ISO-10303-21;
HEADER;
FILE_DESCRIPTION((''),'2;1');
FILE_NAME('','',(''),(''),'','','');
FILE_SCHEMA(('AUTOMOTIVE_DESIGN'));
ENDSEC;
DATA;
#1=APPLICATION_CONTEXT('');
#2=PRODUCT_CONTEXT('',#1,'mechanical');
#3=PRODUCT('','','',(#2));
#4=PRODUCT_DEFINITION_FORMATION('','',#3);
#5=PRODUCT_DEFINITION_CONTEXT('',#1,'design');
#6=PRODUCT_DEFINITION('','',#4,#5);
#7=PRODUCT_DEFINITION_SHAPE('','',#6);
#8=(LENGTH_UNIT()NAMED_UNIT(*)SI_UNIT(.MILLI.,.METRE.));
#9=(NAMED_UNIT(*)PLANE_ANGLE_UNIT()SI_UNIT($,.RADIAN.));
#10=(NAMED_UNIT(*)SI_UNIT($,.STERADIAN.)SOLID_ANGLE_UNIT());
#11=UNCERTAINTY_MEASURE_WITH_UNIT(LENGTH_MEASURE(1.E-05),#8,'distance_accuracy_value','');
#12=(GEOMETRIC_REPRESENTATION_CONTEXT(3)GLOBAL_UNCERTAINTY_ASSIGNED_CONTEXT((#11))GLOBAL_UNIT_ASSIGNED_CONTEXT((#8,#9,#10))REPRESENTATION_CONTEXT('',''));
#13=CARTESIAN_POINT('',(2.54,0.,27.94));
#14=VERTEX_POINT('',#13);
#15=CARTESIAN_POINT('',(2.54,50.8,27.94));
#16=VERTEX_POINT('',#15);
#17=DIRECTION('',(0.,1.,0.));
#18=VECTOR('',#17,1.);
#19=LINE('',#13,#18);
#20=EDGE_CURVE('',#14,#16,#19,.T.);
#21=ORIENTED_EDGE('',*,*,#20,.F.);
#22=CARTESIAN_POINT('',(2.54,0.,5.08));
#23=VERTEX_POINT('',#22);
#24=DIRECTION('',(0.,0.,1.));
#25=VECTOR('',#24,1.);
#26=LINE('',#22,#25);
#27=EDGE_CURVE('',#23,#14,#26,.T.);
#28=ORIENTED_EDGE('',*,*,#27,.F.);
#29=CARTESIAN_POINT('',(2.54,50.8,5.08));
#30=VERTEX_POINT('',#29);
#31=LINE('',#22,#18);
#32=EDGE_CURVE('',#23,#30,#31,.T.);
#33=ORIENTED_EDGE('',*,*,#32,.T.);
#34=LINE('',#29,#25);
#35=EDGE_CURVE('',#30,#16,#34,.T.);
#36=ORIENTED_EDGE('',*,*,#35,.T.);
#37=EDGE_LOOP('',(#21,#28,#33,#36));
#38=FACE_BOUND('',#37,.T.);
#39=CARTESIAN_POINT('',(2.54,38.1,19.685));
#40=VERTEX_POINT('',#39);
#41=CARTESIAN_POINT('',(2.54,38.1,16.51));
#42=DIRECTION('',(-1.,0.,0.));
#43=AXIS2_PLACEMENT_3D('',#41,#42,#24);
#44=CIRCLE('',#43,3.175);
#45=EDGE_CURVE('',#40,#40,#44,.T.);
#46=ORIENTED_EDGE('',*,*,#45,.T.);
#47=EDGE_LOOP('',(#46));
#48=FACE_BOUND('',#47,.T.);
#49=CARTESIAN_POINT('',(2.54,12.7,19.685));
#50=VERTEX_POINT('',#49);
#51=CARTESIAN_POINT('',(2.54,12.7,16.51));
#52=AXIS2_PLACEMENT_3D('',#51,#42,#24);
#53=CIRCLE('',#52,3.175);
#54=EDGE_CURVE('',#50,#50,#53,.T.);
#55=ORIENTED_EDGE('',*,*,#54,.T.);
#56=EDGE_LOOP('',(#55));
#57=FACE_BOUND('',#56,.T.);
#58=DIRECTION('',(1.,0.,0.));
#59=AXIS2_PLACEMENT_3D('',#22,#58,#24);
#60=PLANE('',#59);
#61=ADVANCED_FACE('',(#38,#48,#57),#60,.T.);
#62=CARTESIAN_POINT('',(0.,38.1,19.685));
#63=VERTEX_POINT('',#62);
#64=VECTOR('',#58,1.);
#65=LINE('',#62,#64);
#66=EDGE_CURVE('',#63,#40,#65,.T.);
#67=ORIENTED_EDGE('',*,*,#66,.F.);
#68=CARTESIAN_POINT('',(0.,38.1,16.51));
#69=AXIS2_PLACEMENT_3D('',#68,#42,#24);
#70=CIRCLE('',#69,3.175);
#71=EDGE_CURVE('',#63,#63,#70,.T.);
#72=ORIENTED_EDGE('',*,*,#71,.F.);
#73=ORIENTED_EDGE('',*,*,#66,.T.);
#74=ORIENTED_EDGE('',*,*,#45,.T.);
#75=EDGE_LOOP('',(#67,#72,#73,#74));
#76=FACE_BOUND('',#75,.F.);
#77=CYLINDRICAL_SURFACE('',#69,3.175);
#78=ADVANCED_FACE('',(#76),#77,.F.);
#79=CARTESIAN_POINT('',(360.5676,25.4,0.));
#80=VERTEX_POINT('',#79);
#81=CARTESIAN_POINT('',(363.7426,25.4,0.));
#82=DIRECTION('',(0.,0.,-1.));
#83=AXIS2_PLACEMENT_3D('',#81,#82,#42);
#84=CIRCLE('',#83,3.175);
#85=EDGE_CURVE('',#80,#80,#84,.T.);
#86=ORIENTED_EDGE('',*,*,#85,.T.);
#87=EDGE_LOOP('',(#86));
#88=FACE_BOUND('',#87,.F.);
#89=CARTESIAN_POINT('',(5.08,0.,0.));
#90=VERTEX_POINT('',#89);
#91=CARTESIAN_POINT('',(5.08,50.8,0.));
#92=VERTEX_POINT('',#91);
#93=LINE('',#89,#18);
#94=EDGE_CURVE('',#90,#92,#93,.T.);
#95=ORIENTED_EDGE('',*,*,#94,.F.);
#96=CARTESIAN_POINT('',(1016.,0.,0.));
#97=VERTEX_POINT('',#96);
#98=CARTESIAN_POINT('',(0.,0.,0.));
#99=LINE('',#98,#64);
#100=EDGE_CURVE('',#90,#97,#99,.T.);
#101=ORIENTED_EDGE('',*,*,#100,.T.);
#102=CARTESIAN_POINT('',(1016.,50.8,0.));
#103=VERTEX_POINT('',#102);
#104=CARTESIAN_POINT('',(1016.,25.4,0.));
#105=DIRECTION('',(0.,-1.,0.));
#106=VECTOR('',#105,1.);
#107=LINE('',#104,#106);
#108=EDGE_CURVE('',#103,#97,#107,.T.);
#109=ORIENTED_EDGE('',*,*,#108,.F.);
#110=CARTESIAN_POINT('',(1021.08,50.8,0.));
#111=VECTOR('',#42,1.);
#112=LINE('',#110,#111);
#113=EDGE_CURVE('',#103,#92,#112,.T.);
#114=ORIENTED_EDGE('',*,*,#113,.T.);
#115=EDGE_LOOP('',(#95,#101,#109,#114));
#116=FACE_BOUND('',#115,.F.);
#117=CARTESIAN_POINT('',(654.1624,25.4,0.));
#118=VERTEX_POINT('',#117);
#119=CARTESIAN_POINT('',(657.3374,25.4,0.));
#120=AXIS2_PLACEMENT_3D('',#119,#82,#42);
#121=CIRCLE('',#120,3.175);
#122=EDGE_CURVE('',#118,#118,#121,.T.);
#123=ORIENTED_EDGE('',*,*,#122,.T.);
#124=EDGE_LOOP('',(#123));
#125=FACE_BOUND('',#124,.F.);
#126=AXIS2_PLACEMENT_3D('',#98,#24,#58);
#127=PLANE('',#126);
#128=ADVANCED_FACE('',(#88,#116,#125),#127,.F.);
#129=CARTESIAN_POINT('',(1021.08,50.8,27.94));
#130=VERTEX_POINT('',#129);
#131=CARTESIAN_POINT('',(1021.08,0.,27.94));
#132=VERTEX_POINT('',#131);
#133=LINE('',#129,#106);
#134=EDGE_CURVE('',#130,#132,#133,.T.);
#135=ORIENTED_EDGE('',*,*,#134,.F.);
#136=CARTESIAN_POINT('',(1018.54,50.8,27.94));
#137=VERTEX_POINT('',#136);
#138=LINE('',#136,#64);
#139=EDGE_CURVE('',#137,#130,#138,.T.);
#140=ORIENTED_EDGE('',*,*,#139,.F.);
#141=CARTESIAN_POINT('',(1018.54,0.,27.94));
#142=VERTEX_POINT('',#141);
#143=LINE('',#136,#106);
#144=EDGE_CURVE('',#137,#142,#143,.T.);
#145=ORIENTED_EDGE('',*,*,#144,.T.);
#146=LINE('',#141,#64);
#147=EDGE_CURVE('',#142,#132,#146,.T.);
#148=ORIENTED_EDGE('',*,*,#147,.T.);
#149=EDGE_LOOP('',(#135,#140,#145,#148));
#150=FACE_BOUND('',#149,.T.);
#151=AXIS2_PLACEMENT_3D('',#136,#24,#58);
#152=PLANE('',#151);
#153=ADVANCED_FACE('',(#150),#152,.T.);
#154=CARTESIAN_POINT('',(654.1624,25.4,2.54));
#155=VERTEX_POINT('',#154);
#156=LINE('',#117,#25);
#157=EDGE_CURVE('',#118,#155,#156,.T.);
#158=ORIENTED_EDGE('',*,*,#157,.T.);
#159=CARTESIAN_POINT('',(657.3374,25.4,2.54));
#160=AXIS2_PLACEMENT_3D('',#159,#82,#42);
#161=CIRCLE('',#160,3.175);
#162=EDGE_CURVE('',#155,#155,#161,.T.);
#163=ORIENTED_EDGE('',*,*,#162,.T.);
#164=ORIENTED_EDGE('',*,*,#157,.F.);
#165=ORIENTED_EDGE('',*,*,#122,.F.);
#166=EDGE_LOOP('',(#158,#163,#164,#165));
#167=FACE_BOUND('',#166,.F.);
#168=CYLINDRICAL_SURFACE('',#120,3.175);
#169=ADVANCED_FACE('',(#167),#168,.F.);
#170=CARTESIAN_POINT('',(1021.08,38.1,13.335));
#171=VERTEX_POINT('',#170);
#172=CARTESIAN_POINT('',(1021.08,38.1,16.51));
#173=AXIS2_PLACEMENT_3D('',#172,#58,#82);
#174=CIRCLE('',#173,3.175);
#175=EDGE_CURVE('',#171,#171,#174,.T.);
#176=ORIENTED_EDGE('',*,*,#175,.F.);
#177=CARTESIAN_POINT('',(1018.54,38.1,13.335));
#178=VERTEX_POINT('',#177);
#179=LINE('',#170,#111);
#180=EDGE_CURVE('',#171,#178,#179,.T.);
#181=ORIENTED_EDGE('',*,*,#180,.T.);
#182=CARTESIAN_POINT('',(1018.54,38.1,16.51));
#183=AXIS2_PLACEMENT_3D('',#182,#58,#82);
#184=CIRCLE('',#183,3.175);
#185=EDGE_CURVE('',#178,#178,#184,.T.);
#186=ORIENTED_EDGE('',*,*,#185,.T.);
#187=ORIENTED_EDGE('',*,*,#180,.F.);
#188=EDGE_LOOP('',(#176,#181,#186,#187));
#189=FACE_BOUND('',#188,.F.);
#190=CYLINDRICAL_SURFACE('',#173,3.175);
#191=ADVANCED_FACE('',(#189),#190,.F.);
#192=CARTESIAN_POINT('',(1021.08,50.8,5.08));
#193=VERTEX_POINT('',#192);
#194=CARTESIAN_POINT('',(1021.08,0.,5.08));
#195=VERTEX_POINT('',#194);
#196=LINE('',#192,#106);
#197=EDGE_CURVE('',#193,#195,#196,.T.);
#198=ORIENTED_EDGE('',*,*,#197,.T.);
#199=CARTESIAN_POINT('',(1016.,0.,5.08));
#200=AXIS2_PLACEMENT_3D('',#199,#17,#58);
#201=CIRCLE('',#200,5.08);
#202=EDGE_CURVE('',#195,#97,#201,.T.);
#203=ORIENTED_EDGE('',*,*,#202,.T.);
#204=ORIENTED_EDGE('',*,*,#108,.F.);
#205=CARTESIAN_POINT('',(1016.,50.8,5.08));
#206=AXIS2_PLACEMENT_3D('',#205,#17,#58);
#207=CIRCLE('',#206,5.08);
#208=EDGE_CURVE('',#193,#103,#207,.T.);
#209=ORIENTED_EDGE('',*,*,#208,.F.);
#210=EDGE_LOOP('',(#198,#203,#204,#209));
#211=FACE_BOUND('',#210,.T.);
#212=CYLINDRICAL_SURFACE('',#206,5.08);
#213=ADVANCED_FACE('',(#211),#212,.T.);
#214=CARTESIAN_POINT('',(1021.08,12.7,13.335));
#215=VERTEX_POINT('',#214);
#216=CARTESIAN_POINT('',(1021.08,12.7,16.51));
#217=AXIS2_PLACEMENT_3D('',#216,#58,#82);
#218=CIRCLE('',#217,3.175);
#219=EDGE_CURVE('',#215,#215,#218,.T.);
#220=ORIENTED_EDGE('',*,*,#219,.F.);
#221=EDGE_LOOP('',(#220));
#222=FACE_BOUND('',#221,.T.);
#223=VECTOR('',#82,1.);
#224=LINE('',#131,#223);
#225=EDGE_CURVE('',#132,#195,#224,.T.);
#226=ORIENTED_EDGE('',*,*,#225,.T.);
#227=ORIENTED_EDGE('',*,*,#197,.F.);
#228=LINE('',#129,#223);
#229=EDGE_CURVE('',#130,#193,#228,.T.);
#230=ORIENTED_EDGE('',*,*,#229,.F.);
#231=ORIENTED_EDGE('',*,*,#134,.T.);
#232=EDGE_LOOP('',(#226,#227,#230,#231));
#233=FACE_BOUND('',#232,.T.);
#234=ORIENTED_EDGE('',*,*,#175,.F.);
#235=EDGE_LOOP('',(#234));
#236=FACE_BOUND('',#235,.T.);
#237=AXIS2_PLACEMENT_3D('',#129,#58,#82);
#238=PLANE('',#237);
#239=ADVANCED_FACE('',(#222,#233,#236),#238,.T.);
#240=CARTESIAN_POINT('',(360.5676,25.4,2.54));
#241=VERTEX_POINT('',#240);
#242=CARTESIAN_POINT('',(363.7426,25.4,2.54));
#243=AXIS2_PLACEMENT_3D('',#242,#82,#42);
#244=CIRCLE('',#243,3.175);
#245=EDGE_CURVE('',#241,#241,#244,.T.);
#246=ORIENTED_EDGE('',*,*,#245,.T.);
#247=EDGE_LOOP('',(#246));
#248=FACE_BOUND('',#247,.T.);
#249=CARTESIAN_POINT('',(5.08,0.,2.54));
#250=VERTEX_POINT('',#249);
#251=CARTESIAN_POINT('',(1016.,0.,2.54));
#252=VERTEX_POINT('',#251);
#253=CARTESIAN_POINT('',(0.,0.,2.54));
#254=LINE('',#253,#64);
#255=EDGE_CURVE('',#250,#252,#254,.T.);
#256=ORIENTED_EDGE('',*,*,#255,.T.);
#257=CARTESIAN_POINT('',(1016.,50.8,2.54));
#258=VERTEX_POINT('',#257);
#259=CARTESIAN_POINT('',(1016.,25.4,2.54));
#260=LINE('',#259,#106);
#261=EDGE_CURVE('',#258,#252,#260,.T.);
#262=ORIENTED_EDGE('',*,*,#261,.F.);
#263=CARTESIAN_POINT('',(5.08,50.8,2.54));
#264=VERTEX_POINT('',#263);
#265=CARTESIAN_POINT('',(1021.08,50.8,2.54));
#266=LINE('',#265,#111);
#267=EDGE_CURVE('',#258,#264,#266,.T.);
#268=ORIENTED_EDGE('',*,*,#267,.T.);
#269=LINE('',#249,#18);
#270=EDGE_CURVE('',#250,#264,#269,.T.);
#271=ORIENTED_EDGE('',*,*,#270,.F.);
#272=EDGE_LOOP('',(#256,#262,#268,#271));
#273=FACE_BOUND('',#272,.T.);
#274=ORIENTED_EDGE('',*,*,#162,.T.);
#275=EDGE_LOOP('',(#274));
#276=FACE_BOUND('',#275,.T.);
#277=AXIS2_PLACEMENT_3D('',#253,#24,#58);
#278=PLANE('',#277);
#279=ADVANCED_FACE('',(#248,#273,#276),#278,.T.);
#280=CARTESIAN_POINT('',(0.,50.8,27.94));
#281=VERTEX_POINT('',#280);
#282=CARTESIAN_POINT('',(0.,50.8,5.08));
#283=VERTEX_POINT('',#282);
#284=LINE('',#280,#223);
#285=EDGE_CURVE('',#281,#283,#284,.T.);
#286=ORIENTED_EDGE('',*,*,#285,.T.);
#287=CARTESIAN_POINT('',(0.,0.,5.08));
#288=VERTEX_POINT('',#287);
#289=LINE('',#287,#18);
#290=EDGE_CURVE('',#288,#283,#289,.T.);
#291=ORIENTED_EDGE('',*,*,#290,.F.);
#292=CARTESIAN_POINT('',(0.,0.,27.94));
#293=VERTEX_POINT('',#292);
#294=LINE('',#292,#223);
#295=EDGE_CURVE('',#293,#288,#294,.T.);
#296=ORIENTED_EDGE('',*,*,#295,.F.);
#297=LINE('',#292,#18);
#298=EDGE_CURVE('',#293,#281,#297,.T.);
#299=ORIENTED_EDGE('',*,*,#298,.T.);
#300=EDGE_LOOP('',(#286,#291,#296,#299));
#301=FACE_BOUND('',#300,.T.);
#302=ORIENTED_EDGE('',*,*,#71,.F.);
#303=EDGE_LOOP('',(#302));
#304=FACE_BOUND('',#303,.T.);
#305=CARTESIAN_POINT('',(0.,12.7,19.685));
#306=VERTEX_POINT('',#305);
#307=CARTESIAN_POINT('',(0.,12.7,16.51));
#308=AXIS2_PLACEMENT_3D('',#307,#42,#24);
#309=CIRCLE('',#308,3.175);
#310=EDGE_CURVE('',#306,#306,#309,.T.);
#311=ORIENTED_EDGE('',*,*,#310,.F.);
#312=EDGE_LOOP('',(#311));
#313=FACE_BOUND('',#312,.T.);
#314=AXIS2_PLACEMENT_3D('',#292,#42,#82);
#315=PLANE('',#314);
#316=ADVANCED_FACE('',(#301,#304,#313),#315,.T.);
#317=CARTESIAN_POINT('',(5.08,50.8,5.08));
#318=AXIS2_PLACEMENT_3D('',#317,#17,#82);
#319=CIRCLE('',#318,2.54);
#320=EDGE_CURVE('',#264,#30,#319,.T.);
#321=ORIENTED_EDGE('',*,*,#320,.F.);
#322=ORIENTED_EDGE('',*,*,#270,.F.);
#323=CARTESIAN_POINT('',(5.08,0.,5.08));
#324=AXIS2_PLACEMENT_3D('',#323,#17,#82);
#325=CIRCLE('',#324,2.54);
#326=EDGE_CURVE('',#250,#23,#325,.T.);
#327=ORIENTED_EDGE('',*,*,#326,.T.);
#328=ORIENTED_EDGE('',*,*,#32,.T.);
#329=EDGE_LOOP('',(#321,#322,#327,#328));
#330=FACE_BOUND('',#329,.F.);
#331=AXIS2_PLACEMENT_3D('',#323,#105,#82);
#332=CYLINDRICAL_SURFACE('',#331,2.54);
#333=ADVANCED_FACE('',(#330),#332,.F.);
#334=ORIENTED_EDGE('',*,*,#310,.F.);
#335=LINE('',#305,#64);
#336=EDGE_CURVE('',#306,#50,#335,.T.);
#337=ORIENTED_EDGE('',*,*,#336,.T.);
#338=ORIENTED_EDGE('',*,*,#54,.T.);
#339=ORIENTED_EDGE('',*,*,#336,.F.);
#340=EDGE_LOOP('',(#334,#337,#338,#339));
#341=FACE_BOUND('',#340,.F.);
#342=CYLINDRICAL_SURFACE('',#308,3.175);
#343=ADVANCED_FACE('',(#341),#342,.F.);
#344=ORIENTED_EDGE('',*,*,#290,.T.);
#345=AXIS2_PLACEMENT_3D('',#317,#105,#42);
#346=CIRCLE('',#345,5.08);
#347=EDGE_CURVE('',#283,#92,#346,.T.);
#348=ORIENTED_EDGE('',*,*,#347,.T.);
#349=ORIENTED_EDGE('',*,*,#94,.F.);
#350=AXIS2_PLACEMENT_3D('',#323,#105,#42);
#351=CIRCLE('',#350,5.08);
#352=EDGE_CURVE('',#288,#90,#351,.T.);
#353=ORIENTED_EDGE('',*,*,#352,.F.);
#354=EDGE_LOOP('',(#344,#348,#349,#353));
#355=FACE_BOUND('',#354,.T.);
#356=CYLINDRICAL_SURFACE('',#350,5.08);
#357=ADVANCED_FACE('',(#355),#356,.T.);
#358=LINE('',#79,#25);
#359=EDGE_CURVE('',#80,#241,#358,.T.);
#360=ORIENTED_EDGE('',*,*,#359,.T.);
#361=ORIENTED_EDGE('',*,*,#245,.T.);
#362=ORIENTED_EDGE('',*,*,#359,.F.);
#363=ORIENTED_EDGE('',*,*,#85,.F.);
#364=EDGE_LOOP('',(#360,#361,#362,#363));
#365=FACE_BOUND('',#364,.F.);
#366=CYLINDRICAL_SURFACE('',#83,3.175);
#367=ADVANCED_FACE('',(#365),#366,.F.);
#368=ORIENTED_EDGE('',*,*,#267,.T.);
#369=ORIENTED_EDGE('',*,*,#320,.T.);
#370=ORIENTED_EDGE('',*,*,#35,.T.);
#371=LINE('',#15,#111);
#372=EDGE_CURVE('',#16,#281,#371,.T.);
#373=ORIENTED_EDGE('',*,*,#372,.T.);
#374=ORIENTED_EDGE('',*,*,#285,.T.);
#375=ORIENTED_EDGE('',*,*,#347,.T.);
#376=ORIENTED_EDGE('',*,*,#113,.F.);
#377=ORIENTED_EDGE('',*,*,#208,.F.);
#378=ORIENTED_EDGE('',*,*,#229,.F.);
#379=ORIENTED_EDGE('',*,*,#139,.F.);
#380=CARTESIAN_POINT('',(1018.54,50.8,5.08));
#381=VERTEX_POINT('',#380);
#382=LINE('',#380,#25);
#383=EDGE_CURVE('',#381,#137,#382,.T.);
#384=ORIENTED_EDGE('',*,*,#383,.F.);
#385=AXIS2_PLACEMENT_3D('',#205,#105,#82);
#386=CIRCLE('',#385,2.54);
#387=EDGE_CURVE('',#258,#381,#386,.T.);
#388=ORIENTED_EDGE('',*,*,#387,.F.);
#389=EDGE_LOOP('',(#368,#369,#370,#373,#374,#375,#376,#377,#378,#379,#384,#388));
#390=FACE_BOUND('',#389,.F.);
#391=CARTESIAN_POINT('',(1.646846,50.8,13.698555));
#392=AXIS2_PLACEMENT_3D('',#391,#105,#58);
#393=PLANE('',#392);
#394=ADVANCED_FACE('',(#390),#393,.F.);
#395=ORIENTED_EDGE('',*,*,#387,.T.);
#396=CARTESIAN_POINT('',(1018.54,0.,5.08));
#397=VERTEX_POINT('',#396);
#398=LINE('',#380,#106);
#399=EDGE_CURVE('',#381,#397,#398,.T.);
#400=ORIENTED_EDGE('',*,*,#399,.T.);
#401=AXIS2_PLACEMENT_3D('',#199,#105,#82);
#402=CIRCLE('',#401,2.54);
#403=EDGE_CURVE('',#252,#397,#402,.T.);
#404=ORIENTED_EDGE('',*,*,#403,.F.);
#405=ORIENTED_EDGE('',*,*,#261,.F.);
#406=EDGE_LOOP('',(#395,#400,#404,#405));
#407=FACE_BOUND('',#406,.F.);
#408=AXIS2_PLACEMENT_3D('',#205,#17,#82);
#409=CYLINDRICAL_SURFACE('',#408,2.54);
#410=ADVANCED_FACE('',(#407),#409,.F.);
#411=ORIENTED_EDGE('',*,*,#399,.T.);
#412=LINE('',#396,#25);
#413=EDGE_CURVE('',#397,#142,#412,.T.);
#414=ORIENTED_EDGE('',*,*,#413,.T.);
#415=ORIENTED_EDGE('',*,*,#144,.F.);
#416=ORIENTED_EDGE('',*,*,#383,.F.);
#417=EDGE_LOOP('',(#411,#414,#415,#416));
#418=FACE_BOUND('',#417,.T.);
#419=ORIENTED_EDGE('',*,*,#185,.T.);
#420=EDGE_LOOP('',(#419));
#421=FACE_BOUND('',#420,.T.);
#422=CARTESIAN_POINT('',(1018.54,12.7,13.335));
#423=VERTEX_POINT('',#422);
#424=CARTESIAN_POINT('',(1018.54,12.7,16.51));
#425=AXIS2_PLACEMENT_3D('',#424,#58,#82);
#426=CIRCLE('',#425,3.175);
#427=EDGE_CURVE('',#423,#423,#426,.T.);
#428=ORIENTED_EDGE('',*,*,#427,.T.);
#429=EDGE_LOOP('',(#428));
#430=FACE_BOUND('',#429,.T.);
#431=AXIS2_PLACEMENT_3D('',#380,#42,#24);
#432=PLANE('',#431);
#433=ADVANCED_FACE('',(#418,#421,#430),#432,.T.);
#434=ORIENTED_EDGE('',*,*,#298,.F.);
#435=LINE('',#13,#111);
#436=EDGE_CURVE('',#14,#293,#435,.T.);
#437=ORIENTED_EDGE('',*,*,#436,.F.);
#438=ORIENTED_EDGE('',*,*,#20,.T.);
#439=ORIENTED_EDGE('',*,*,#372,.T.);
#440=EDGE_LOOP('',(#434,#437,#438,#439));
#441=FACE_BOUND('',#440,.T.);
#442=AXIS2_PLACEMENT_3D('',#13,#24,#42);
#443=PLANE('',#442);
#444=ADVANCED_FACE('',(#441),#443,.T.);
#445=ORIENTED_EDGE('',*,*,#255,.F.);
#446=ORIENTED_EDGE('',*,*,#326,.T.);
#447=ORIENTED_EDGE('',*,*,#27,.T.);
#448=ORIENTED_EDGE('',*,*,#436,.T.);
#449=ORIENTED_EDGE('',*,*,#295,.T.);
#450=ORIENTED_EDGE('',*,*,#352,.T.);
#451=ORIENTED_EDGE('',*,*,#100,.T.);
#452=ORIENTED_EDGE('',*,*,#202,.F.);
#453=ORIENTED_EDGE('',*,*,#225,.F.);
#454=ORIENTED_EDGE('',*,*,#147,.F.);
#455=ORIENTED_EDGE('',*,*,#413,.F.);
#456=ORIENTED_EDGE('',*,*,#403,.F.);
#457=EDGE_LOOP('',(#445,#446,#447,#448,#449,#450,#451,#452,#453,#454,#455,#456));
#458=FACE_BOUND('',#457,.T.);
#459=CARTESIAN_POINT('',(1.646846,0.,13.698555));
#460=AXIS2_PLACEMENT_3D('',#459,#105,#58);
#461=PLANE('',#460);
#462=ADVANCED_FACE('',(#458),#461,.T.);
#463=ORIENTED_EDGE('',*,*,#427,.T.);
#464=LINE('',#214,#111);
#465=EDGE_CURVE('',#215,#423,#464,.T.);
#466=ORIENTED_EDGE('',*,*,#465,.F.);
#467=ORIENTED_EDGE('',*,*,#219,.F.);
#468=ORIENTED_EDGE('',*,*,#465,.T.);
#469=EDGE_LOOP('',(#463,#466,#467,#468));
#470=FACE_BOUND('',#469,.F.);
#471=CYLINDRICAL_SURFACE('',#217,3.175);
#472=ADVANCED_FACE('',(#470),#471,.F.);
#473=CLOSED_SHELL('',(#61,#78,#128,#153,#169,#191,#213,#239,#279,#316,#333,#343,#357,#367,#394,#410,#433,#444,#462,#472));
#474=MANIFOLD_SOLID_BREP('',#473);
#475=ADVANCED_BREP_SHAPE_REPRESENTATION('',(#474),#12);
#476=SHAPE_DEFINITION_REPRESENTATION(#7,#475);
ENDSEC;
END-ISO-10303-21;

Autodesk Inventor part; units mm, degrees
ref_plane "YZ Plane" through (0, 0, 0) normal (1, 0, 0) x (0, 1, 0)
ref_plane "XZ Plane" through (0, 0, 0) normal (0, 1, 0) x (-1, 0, 0)
ref_plane "XY Plane" through (0, 0, 0) normal (0, 0, 1) x (1, 0, 0)
sketch "Sketch1" plane through (0, 0, 0) normal (0, 0, 1) x (1, 0, 0)
  line L0 (0, 0) -> (1021.08, 0)
  line L1 (1021.08, 0) -> (1021.08, 50.8)
  line L2 (1021.08, 50.8) -> (0, 50.8)
  line L3 (0, 50.8) -> (0, 0)
  dimension "d0" = 1021.08
  dimension "d1" = 50.8
extrude "Plate1" add sketch "Sketch1" along normal blind 2.54
sketch "Sketch2" plane through (2.54, 0, 0) normal (-1, 0, 0) x (0, -1, 0)
  line L0 (-50.8, 0) -> (0, 0)
  line L1 (0, 0) -> (0, 27.94)
  line L2 (0, 27.94) -> (-50.8, 27.94)
  line L3 (-50.8, 27.94) -> (-50.8, 0)
edge flange "Flange1" height 27.94 angle 90 thickness 2.54 bend radius 2.54 thickness toward (-1, 0, 0) relief tear relief width 2.54 relief depth 1.27 corner gap 2.54 corner form 0 edges at (0, 25.4, 2.54) (1021.08, 25.4, 2.54) wall of the first edge with corners at (2.54, 50.8, 0) (2.54, 0, 0) (2.54, 0, 27.94) (2.54, 50.8, 27.94)
bend "Bend1"
corner "Corner1"
sketch "Sketch3" plane through (0, 0, 0) normal (0, 0, -1) x (-1, 0, 0)
  circle A0 centre (-317.326, 37.1303) radius 3.175 projected
  circle A1 centre (-657.3374, 25.4) radius 3.175 projected
  circle A2 centre (-363.7426, 25.4) radius 3.175 projected
  point P0 (0, 0)
extrude "Extrusion1" cut sketch "Sketch3" against normal blind 25.4 contours A1 | A2
sketch "Sketch4" plane through (1021.08, 0, 27.94) normal (1, 0, 0) x (0, 0, -1)
  line L0 (0, 0) -> (22.86, 0)
  line L1 (22.86, 0) -> (22.86, 50.8)
  line L2 (22.86, 50.8) -> (0, 50.8)
  line L3 (0, 50.8) -> (0, 0)
  circle A0 centre (11.43, 38.1) radius 3.175
  circle A1 centre (11.43, 12.7) radius 3.175
  point P0 (27.94, 0)
  dimension "d15" = 6.35
  dimension "d16" = 6.35
extrude "Extrusion2" cut sketch "Sketch4" against normal blind 2.54 contours A0 | A1
sketch "Sketch5" plane through (0, 0, 27.94) normal (-1, 0, 0) x (0, 0, 1)
  line L0 (0, 50.8) -> (-22.86, 50.8)
  line L1 (-22.86, 50.8) -> (-22.86, 0)
  line L2 (-22.86, 0) -> (0, 0)
  line L3 (0, 0) -> (0, 50.8)
  circle A0 centre (-11.43, 38.1) radius 3.175 projected
  circle A1 centre (-11.43, 12.7) radius 3.175 projected
  circle A2 centre (-11.43, 12.7) radius 3.175
  circle A3 centre (-11.43, 38.1) radius 3.175
  point P0 (-27.94, 0)
extrude "Extrusion3" cut sketch "Sketch5" against normal blind 2.54 contours A0 | A1
equation "\"d3\" = BendReliefWidth"
equation "\"d4\" = BendReliefDepth"
equation "\"d5\" = MinimumRemnant"
equation "\"d6\" = BendRadius"
equation "\"d9\" = BendRadius"
equation "\"d10\" = CornerReliefSize"
equation "\"d11\" = GapSize"
equation "\"d12\" = JacobiRadiusSize"
equation "\"BendRadius\" = Thickness"
equation "\"BendReliefWidth\" = Thickness"
equation "\"BendReliefDepth\" = 0.5 * Thickness"
equation "\"CornerReliefSize\" = 4 * Thickness"
equation "\"MinimumRemnant\" = 2 * Thickness"
equation "\"TransitionRadius\" = BendRadius"
equation "\"JacobiRadiusSize\" = BendRadius"
equation "\"GapSize\" = Thickness"
equation "\"d2\" = BendRadius"
equation "\"Thickness\" = 2.54"
properties part number "bumper piece"
